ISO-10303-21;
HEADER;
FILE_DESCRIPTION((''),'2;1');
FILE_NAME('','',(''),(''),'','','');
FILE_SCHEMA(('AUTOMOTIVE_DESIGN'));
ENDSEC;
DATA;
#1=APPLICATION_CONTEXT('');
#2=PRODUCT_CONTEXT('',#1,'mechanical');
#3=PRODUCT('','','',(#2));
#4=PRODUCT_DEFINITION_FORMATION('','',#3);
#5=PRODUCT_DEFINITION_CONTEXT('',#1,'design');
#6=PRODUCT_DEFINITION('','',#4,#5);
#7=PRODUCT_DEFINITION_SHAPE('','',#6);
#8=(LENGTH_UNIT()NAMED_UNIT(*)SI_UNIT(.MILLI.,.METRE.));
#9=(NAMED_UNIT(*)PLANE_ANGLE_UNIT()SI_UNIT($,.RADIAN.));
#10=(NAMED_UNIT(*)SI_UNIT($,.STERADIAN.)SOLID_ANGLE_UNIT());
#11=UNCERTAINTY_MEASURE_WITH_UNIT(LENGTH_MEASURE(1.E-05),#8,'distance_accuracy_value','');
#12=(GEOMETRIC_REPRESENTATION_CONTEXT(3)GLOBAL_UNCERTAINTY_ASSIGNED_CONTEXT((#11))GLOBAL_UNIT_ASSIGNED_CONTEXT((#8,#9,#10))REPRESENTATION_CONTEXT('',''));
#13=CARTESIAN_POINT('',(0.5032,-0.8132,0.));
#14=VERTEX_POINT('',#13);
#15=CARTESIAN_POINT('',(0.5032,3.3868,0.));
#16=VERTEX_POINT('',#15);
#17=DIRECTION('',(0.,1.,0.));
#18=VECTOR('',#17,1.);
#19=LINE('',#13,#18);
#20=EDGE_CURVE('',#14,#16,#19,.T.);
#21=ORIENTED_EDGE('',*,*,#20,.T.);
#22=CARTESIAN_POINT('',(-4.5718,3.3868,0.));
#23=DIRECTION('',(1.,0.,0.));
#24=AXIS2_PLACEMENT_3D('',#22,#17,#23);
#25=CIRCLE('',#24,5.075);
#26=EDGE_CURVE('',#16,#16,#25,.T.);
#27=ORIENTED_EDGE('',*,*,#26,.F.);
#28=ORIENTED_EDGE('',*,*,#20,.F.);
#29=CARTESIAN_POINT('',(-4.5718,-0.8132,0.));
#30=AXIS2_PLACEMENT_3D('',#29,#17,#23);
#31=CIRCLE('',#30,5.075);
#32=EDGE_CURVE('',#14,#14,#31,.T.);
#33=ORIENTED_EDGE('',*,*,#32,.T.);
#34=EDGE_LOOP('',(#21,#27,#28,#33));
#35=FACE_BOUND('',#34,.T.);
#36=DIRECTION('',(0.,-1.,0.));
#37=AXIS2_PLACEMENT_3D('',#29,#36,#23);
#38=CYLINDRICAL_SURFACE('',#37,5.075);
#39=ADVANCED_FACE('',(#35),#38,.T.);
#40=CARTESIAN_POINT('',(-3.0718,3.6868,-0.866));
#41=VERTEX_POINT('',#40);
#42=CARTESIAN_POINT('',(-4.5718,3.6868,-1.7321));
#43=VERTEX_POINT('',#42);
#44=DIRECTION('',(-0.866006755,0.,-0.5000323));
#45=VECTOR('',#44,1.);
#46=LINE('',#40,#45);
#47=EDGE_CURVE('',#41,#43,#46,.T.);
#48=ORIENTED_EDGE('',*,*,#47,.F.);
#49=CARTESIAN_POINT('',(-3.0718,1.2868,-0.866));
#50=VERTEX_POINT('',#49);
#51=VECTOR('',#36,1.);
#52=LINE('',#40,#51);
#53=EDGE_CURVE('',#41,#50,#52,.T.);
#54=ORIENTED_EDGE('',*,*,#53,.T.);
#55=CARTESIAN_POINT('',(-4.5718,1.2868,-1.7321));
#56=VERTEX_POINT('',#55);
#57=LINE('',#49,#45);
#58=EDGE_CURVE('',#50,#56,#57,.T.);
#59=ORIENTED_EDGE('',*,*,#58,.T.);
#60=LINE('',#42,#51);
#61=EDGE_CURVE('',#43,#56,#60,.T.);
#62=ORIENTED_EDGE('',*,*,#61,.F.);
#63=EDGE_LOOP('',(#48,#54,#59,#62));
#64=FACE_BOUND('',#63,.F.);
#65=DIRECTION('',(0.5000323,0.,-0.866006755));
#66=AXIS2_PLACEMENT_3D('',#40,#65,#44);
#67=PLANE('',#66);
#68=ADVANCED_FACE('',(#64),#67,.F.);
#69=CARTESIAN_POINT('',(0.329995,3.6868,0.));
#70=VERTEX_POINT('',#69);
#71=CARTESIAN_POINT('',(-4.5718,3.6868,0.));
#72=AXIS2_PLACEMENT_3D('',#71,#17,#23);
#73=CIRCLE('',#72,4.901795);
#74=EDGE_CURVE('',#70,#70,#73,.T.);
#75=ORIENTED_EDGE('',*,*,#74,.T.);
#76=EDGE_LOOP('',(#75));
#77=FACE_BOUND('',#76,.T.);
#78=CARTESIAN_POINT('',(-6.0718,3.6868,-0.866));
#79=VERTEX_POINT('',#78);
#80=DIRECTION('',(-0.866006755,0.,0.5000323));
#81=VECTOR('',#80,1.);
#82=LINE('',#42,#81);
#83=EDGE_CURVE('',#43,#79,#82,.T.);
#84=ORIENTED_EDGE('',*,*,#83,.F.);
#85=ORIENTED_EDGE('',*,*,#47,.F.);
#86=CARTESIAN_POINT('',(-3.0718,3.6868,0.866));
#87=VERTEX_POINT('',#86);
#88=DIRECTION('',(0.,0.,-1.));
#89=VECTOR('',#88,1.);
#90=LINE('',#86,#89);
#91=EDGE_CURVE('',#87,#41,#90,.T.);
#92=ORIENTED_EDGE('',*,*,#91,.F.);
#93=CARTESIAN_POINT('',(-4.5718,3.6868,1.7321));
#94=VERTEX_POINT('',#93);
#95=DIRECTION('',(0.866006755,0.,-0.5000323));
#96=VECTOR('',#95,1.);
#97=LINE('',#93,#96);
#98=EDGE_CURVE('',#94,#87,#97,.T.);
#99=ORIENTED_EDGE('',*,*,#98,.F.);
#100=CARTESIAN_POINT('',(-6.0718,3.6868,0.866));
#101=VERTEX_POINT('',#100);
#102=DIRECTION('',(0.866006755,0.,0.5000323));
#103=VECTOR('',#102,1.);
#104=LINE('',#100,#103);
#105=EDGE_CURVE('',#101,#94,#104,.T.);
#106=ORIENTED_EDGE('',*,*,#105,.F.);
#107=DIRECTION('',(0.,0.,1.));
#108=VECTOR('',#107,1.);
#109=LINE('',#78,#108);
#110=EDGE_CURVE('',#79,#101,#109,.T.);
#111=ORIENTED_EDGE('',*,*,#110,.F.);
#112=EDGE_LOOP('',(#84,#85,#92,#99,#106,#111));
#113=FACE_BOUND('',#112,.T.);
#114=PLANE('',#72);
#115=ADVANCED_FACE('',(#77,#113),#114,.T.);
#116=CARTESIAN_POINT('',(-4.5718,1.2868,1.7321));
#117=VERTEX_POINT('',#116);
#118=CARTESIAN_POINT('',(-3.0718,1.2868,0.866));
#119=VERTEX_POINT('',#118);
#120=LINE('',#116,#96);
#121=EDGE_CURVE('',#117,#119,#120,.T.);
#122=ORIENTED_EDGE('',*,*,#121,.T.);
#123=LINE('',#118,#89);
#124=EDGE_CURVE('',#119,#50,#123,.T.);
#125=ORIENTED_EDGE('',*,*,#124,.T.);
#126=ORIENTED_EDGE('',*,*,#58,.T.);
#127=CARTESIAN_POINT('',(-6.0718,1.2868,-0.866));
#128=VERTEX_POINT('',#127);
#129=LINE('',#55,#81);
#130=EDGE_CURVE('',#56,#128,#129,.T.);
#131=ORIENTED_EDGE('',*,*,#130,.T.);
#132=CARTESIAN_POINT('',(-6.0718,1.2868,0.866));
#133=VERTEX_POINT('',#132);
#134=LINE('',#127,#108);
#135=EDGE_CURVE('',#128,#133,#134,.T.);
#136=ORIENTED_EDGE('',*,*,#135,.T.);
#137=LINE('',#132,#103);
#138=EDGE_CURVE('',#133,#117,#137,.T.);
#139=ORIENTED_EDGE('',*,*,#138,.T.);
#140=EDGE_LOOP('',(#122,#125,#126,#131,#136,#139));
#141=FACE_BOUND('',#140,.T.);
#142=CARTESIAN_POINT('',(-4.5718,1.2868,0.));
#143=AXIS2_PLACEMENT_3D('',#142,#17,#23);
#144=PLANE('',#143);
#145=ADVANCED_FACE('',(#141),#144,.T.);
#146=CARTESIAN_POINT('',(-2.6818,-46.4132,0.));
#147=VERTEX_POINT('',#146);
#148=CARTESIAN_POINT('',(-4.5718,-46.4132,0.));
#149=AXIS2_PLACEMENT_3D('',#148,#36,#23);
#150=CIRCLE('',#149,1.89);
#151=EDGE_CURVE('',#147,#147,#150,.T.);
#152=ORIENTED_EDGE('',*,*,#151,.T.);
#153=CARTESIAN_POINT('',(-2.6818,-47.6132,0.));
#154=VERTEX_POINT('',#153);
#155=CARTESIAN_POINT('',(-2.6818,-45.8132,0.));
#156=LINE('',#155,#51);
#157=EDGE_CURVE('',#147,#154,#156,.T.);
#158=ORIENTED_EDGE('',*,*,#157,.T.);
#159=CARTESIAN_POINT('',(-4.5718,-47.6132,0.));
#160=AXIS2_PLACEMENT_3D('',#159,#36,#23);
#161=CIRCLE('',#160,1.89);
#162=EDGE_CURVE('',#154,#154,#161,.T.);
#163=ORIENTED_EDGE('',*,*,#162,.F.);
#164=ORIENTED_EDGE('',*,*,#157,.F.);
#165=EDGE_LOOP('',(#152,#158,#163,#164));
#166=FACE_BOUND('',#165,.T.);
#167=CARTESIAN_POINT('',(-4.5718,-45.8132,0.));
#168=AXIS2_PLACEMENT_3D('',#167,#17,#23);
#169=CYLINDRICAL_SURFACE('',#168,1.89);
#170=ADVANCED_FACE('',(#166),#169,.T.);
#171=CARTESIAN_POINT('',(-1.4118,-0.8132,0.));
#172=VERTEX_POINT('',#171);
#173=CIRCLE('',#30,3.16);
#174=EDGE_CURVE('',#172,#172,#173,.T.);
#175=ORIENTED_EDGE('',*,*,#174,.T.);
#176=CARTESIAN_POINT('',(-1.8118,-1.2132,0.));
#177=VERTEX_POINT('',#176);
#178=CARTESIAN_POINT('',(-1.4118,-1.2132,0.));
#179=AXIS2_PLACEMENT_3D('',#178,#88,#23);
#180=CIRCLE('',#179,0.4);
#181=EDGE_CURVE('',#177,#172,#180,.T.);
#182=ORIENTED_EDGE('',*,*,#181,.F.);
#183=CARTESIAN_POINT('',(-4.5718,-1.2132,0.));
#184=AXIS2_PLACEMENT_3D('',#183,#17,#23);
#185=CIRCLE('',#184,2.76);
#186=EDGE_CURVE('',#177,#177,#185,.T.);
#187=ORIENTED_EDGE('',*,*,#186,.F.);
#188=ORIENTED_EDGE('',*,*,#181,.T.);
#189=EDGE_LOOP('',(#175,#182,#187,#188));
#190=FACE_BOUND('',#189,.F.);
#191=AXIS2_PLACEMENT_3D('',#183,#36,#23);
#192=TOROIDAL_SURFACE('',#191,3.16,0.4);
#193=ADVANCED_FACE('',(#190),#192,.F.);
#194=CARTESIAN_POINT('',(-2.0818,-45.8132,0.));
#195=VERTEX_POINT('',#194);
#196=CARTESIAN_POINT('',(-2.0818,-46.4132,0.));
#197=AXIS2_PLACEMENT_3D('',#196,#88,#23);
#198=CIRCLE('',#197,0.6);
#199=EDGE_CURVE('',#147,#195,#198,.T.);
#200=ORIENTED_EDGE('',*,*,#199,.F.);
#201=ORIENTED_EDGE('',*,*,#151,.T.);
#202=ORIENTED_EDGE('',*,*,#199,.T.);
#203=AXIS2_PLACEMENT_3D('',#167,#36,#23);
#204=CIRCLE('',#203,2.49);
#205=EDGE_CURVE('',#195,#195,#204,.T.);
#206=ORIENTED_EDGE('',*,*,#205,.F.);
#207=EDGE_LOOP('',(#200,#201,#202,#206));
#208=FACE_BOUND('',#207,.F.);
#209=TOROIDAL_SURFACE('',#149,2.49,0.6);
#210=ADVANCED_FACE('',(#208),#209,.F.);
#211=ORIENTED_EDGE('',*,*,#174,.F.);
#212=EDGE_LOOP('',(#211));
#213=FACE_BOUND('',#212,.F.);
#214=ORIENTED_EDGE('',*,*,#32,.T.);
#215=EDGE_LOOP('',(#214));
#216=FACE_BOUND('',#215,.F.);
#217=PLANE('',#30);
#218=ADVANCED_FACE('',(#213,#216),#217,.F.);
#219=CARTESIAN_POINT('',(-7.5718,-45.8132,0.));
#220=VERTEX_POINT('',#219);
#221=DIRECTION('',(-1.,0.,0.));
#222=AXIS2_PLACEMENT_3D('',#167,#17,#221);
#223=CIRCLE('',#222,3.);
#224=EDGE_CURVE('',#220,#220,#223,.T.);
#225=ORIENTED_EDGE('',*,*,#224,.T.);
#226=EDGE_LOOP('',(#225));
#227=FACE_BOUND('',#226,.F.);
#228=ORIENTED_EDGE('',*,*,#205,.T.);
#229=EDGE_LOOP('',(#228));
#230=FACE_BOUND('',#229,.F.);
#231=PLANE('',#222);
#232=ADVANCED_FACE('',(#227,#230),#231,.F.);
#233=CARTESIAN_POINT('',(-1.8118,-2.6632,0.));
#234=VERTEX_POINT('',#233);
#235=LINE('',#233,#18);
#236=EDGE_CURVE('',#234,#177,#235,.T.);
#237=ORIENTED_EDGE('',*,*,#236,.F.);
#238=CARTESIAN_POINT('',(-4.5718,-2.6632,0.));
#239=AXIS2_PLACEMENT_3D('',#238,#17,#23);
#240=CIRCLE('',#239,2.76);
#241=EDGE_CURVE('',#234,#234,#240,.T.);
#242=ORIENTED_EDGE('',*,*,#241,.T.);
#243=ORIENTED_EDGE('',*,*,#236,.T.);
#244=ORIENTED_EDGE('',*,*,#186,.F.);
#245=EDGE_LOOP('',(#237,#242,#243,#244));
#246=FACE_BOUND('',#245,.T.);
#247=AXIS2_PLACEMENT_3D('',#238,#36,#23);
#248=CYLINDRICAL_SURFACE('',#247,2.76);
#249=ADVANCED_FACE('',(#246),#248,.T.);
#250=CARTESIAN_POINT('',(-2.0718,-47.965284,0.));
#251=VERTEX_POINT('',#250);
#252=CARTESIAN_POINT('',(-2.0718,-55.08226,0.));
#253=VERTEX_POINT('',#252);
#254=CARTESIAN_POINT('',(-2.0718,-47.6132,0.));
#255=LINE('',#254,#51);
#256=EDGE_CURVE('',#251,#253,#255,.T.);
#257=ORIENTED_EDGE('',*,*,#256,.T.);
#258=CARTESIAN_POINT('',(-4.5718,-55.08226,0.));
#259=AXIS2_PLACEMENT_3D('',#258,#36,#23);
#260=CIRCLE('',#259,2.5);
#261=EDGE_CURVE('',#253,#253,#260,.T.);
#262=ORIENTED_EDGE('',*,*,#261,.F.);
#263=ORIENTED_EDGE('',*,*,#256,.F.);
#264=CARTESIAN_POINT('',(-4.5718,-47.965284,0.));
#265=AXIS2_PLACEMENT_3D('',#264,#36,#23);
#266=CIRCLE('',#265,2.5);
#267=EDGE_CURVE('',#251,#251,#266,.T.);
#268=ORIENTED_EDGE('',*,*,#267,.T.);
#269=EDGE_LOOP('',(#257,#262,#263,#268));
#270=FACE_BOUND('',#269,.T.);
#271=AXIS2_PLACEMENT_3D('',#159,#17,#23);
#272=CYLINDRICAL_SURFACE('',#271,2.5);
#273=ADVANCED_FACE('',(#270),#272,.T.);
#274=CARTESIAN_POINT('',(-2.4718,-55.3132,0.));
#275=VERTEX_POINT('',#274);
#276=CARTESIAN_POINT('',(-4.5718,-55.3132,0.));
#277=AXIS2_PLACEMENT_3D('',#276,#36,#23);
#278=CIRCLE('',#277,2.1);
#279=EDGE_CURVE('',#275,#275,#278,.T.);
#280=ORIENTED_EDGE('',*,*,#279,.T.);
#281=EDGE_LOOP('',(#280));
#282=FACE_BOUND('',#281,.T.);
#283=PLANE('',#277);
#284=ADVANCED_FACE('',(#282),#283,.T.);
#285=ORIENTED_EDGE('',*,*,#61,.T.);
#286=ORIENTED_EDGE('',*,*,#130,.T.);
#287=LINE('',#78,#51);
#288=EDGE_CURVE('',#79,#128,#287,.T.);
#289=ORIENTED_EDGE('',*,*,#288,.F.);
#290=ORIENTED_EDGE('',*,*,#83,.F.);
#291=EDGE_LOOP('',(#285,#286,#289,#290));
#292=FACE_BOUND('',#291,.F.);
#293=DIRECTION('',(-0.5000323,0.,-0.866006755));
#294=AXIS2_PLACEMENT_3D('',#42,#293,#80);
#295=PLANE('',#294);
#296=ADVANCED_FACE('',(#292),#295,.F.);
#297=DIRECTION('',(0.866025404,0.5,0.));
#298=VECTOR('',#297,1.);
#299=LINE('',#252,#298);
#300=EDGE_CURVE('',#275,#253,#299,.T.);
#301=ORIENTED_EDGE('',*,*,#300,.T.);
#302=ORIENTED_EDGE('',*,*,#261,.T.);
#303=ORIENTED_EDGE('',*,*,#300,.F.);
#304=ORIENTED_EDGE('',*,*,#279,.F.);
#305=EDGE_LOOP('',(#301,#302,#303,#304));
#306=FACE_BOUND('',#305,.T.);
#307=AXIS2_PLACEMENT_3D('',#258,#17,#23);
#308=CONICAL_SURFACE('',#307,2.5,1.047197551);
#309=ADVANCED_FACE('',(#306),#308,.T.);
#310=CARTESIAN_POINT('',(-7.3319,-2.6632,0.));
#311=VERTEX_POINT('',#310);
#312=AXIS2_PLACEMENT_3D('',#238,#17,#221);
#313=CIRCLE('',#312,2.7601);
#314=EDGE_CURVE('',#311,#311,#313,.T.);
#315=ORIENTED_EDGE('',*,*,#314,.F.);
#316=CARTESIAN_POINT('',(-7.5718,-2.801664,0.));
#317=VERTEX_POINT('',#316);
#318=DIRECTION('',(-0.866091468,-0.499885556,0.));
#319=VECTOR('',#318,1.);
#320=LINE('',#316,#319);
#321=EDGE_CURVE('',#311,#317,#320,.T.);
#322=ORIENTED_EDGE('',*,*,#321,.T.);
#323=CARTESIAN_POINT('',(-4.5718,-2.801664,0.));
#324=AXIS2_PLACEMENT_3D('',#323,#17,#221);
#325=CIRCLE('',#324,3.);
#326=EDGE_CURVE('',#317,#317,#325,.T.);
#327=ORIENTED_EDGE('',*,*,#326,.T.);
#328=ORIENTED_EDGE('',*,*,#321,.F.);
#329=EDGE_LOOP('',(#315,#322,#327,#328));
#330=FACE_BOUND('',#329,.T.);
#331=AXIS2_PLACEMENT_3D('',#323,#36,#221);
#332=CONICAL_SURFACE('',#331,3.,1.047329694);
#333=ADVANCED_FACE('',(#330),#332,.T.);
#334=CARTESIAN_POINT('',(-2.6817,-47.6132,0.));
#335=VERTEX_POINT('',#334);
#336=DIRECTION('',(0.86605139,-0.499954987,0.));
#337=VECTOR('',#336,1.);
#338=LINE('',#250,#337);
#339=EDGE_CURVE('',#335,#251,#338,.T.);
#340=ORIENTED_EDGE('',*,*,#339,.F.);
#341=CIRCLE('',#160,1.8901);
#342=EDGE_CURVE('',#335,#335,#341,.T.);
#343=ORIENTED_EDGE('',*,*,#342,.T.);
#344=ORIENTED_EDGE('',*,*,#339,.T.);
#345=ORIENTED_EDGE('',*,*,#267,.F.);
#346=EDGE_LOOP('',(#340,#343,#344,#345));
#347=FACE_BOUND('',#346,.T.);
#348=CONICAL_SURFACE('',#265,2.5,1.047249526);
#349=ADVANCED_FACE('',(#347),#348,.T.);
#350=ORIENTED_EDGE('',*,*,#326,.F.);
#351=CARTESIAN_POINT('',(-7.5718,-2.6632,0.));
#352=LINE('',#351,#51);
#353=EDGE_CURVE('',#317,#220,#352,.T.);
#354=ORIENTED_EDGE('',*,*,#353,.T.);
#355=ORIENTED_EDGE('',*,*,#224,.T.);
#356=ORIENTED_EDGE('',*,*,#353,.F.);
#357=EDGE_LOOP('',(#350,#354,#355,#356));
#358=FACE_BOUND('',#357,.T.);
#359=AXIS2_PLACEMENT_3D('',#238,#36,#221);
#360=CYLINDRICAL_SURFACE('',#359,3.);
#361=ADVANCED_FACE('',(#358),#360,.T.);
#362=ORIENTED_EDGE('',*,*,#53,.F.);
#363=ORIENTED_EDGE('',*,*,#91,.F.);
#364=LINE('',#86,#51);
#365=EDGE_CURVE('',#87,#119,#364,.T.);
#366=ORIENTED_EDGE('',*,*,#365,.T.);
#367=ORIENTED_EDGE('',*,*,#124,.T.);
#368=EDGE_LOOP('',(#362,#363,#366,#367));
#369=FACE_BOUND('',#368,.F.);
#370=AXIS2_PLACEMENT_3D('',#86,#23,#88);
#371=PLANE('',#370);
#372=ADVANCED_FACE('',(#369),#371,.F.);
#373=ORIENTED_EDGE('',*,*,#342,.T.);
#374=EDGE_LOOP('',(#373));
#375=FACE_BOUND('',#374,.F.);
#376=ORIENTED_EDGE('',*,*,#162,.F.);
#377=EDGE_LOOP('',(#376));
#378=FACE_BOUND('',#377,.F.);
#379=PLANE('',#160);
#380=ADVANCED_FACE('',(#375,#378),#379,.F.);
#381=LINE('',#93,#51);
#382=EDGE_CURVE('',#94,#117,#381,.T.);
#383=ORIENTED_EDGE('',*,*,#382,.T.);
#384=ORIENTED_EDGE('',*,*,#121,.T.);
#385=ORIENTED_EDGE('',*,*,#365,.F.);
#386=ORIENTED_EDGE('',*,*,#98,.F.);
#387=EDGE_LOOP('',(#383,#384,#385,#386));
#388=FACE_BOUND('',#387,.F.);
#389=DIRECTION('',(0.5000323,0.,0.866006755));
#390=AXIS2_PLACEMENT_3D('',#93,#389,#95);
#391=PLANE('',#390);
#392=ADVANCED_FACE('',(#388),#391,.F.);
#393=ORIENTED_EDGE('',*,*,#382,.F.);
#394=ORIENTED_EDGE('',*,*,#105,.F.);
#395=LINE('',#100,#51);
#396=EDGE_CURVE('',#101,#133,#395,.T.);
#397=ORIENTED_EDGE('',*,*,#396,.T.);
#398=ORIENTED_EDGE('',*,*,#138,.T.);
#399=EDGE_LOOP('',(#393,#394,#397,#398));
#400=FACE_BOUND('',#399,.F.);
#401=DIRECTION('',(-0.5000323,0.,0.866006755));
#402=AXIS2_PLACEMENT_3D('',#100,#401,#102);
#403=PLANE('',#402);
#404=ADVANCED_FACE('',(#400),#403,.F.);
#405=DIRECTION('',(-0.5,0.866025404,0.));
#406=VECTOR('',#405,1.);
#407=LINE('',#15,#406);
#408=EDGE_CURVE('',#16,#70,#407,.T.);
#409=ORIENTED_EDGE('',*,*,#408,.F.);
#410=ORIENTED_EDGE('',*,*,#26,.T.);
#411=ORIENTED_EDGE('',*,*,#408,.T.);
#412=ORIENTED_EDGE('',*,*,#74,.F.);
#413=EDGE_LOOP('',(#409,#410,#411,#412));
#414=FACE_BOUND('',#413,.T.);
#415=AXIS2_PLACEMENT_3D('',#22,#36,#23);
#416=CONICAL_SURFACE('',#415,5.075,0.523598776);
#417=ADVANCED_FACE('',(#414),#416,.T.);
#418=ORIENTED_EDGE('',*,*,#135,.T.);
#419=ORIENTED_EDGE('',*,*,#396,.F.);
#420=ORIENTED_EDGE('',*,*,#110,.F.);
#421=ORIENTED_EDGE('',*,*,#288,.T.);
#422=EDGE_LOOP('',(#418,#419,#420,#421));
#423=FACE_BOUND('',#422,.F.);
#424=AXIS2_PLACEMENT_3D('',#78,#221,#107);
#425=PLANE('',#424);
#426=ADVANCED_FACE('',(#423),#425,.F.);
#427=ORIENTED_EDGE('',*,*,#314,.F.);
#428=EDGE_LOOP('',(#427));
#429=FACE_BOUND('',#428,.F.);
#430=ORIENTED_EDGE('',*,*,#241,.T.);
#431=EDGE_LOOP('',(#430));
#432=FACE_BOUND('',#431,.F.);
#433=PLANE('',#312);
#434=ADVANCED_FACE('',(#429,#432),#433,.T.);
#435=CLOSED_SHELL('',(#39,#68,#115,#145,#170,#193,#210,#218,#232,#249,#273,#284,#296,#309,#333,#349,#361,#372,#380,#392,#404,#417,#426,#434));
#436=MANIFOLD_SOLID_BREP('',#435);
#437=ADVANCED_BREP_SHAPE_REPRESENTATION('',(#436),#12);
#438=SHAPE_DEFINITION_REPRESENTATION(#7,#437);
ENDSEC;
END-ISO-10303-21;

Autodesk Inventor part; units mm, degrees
ref_plane "YZ Plane" through (0, 0, 0) normal (1, 0, 0) x (0, 1, 0)
ref_plane "XZ Plane" through (0, 0, 0) normal (0, 1, 0) x (-1, 0, 0)
ref_plane "XY Plane" through (0, 0, 0) normal (0, 0, 1) x (1, 0, 0)
sketch "Sketch1" plane through (0, 0, 0) normal (0, 0, 1) x (1, 0, 0)
  line L0 (-4.5718, -2.6632) -> (-7.5718, -2.6632)
  line L1 (-7.5718, -2.6632) -> (-7.5718, -45.8132)
  line L2 (-7.5718, -45.8132) -> (-4.5718, -45.8132)
  line L3 (-4.5718, -45.8132) -> (-4.5718, -2.6632)
  dimension "d1" = 43.15
  dimension "d2" = 3
revolve "Shoulder" add sketch "Sketch1" angle 360 about axis through (-4.5718, -45.8132, 0) along (0, 1, 0)
sketch "Sketch2" plane through (-4.5718, -2.6632, 0) normal (0, 1, 0) x (1, 0, 0)
  circle A0 centre (0, 0) radius 3 projected
  circle A1 centre (0, 0) radius 2.76
  dimension "d3" = 5.52
extrude "Shoulder_neck" add sketch "Sketch2" along normal blind 1.85 contours A1
sketch "Sketch3" plane through (-4.5718, -0.8132, 0) normal (0, 1, 0) x (1, 0, 0)
  circle A0 centre (0, 0) radius 2.76 projected
  circle A1 centre (0, 0) radius 5.075
  dimension "d6" = 10.15
extrude "Head" add sketch "Sketch3" along normal blind 4.5 contours A0 | A1
sketch "Sketch4" plane through (-4.5718, -45.8132, 0) normal (0, -1, 0) x (1, 0, 0)
  circle A0 centre (0, 0) radius 3 projected
  circle A1 centre (0, 0) radius 1.89
  dimension "d9" = 3.78
extrude "Thread_neck" add sketch "Sketch4" along normal blind 1.8 contours A1
sketch "Sketch5" plane through (-4.5718, -47.6132, 0) normal (0, -1, 0) x (1, 0, 0)
  circle A0 centre (0, 0) radius 1.89 projected
  circle A1 centre (0, 0) radius 2.5
  dimension "d12" = 5
extrude "Thread_shoulder" add sketch "Sketch5" along normal blind 7.7 contours A0 | A1
sketch "Sketch6" plane through (-4.5718, 3.6868, 0) normal (0, 1, 0) x (1, 0, 0)
  circle A0 centre (0, 0) radius 5.075 projected
  circle A1 centre (0, 0) radius 1.5 construction
  line L0 (-1.5, 0.866) -> (-1.5, -0.866)
  line L1 (-1.5, -0.866) -> (0, -1.7321)
  line L2 (0, -1.7321) -> (1.5, -0.866)
  line L3 (1.5, -0.866) -> (1.5, 0.866)
  line L4 (1.5, 0.866) -> (0, 1.7321)
  line L5 (0, 1.7321) -> (-1.5, 0.866)
  dimension "d15" = 3
extrude "Hex" cut sketch "Sketch6" against normal blind 2.4 contours L5 L4 L3 L2 L1 L0
chamfer "Chamfer1" distance 0.24 angle 30 1 edges at (-1.5718, -2.6632, 0) measured on face at (-7.436, -2.6632, -0.4595)
fillet "Fillet1" radius 0.4 1 edges at (-7.3318, -0.8132, 0)
chamfer "Chamfer2" distance 0.3 angle 30 1 edges at (-9.6468, 3.6868, 0) measured on face at (0.4867, 2.1868, 0.4084)
chamfer "Chamfer3" distance 0.4 angle 30 1 edges at (-7.0718, -55.3132, 0) measured on face at (-3.3106, -55.3132, -0.6619)
fillet "Fillet2" radius 0.6 1 edges at (-6.4618, -45.8132, 0)
chamfer "Chamfer7" distance 0.61 angle 30 1 edges at (-7.0718, -47.6132, 0) measured on face at (-2.3177, -47.6132, -0.3502)
thread "Thread" size "M5x0.8" class "6g" standard "ANSI Metric M Profile" full length
equation "\"d1\" = Shoulder_length - Shoulder_neck_length"
equation "\"d2\" = 0.5 * Shoulder_diameter"
equation "\"d3\" = Shoulder_neck_dia"
equation "\"d4\" = Shoulder_neck_length"
equation "\"d6\" = Head_diameter"
equation "\"d7\" = Head_height"
equation "\"d9\" = Thread_neck_dia"
equation "\"d10\" = Thread_neck_length"
equation "\"d12\" = Thread_diameter"
equation "\"d13\" = Thread_length - Thread_neck_length"
equation "\"d15\" = Hex_size"
equation "\"d16\" = Hex_length"
equation "\"d18\" = -0.5 * Shoulder_neck_dia + 0.5 * Shoulder_diameter"
equation "\"d64\" = -0.5 * Shoulder_neck_dia + 0.5 * Shoulder_diameter"
equation "\"d21\" = 0.1 * Hex_size"
equation "\"d65\" = 0.1 * Hex_size"
equation "\"d23\" = 0.5 * Thread_pitch"
equation "\"d66\" = 0.5 * Thread_pitch"
equation "\"d25\" = Thread_neck_radius"
equation "\"d60\" = -0.5 * Thread_neck_dia + 0.5 * Thread_diameter"
equation "\"d67\" = -0.5 * Thread_neck_dia + 0.5 * Thread_diameter"
equation "\"Shoulder_diameter\" = 6"
equation "\"Shoulder_length\" = 45"
equation "\"Shoulder_neck_dia\" = 5.52"
equation "\"Thread_diameter\" = 5"
equation "\"Thread_length\" = 9.5"
equation "\"Head_diameter\" = 10.15"
equation "\"Head_height\" = 4.5"
equation "\"Thread_neck_dia\" = 3.78"
equation "\"Hex_size\" = 3"
equation "\"Hex_length\" = 2.4"
equation "\"Thread_pitch\" = 0.8"
equation "\"Shoulder_neck_length\" = 1.85"
equation "\"Thread_neck_length\" = 1.8"
equation "\"Thread_neck_radius\" = 0.6"
properties part number "SCREW, SHOULDER, P, 12.9,  M6X45MM" material "Steel, High Strength Low Alloy"
